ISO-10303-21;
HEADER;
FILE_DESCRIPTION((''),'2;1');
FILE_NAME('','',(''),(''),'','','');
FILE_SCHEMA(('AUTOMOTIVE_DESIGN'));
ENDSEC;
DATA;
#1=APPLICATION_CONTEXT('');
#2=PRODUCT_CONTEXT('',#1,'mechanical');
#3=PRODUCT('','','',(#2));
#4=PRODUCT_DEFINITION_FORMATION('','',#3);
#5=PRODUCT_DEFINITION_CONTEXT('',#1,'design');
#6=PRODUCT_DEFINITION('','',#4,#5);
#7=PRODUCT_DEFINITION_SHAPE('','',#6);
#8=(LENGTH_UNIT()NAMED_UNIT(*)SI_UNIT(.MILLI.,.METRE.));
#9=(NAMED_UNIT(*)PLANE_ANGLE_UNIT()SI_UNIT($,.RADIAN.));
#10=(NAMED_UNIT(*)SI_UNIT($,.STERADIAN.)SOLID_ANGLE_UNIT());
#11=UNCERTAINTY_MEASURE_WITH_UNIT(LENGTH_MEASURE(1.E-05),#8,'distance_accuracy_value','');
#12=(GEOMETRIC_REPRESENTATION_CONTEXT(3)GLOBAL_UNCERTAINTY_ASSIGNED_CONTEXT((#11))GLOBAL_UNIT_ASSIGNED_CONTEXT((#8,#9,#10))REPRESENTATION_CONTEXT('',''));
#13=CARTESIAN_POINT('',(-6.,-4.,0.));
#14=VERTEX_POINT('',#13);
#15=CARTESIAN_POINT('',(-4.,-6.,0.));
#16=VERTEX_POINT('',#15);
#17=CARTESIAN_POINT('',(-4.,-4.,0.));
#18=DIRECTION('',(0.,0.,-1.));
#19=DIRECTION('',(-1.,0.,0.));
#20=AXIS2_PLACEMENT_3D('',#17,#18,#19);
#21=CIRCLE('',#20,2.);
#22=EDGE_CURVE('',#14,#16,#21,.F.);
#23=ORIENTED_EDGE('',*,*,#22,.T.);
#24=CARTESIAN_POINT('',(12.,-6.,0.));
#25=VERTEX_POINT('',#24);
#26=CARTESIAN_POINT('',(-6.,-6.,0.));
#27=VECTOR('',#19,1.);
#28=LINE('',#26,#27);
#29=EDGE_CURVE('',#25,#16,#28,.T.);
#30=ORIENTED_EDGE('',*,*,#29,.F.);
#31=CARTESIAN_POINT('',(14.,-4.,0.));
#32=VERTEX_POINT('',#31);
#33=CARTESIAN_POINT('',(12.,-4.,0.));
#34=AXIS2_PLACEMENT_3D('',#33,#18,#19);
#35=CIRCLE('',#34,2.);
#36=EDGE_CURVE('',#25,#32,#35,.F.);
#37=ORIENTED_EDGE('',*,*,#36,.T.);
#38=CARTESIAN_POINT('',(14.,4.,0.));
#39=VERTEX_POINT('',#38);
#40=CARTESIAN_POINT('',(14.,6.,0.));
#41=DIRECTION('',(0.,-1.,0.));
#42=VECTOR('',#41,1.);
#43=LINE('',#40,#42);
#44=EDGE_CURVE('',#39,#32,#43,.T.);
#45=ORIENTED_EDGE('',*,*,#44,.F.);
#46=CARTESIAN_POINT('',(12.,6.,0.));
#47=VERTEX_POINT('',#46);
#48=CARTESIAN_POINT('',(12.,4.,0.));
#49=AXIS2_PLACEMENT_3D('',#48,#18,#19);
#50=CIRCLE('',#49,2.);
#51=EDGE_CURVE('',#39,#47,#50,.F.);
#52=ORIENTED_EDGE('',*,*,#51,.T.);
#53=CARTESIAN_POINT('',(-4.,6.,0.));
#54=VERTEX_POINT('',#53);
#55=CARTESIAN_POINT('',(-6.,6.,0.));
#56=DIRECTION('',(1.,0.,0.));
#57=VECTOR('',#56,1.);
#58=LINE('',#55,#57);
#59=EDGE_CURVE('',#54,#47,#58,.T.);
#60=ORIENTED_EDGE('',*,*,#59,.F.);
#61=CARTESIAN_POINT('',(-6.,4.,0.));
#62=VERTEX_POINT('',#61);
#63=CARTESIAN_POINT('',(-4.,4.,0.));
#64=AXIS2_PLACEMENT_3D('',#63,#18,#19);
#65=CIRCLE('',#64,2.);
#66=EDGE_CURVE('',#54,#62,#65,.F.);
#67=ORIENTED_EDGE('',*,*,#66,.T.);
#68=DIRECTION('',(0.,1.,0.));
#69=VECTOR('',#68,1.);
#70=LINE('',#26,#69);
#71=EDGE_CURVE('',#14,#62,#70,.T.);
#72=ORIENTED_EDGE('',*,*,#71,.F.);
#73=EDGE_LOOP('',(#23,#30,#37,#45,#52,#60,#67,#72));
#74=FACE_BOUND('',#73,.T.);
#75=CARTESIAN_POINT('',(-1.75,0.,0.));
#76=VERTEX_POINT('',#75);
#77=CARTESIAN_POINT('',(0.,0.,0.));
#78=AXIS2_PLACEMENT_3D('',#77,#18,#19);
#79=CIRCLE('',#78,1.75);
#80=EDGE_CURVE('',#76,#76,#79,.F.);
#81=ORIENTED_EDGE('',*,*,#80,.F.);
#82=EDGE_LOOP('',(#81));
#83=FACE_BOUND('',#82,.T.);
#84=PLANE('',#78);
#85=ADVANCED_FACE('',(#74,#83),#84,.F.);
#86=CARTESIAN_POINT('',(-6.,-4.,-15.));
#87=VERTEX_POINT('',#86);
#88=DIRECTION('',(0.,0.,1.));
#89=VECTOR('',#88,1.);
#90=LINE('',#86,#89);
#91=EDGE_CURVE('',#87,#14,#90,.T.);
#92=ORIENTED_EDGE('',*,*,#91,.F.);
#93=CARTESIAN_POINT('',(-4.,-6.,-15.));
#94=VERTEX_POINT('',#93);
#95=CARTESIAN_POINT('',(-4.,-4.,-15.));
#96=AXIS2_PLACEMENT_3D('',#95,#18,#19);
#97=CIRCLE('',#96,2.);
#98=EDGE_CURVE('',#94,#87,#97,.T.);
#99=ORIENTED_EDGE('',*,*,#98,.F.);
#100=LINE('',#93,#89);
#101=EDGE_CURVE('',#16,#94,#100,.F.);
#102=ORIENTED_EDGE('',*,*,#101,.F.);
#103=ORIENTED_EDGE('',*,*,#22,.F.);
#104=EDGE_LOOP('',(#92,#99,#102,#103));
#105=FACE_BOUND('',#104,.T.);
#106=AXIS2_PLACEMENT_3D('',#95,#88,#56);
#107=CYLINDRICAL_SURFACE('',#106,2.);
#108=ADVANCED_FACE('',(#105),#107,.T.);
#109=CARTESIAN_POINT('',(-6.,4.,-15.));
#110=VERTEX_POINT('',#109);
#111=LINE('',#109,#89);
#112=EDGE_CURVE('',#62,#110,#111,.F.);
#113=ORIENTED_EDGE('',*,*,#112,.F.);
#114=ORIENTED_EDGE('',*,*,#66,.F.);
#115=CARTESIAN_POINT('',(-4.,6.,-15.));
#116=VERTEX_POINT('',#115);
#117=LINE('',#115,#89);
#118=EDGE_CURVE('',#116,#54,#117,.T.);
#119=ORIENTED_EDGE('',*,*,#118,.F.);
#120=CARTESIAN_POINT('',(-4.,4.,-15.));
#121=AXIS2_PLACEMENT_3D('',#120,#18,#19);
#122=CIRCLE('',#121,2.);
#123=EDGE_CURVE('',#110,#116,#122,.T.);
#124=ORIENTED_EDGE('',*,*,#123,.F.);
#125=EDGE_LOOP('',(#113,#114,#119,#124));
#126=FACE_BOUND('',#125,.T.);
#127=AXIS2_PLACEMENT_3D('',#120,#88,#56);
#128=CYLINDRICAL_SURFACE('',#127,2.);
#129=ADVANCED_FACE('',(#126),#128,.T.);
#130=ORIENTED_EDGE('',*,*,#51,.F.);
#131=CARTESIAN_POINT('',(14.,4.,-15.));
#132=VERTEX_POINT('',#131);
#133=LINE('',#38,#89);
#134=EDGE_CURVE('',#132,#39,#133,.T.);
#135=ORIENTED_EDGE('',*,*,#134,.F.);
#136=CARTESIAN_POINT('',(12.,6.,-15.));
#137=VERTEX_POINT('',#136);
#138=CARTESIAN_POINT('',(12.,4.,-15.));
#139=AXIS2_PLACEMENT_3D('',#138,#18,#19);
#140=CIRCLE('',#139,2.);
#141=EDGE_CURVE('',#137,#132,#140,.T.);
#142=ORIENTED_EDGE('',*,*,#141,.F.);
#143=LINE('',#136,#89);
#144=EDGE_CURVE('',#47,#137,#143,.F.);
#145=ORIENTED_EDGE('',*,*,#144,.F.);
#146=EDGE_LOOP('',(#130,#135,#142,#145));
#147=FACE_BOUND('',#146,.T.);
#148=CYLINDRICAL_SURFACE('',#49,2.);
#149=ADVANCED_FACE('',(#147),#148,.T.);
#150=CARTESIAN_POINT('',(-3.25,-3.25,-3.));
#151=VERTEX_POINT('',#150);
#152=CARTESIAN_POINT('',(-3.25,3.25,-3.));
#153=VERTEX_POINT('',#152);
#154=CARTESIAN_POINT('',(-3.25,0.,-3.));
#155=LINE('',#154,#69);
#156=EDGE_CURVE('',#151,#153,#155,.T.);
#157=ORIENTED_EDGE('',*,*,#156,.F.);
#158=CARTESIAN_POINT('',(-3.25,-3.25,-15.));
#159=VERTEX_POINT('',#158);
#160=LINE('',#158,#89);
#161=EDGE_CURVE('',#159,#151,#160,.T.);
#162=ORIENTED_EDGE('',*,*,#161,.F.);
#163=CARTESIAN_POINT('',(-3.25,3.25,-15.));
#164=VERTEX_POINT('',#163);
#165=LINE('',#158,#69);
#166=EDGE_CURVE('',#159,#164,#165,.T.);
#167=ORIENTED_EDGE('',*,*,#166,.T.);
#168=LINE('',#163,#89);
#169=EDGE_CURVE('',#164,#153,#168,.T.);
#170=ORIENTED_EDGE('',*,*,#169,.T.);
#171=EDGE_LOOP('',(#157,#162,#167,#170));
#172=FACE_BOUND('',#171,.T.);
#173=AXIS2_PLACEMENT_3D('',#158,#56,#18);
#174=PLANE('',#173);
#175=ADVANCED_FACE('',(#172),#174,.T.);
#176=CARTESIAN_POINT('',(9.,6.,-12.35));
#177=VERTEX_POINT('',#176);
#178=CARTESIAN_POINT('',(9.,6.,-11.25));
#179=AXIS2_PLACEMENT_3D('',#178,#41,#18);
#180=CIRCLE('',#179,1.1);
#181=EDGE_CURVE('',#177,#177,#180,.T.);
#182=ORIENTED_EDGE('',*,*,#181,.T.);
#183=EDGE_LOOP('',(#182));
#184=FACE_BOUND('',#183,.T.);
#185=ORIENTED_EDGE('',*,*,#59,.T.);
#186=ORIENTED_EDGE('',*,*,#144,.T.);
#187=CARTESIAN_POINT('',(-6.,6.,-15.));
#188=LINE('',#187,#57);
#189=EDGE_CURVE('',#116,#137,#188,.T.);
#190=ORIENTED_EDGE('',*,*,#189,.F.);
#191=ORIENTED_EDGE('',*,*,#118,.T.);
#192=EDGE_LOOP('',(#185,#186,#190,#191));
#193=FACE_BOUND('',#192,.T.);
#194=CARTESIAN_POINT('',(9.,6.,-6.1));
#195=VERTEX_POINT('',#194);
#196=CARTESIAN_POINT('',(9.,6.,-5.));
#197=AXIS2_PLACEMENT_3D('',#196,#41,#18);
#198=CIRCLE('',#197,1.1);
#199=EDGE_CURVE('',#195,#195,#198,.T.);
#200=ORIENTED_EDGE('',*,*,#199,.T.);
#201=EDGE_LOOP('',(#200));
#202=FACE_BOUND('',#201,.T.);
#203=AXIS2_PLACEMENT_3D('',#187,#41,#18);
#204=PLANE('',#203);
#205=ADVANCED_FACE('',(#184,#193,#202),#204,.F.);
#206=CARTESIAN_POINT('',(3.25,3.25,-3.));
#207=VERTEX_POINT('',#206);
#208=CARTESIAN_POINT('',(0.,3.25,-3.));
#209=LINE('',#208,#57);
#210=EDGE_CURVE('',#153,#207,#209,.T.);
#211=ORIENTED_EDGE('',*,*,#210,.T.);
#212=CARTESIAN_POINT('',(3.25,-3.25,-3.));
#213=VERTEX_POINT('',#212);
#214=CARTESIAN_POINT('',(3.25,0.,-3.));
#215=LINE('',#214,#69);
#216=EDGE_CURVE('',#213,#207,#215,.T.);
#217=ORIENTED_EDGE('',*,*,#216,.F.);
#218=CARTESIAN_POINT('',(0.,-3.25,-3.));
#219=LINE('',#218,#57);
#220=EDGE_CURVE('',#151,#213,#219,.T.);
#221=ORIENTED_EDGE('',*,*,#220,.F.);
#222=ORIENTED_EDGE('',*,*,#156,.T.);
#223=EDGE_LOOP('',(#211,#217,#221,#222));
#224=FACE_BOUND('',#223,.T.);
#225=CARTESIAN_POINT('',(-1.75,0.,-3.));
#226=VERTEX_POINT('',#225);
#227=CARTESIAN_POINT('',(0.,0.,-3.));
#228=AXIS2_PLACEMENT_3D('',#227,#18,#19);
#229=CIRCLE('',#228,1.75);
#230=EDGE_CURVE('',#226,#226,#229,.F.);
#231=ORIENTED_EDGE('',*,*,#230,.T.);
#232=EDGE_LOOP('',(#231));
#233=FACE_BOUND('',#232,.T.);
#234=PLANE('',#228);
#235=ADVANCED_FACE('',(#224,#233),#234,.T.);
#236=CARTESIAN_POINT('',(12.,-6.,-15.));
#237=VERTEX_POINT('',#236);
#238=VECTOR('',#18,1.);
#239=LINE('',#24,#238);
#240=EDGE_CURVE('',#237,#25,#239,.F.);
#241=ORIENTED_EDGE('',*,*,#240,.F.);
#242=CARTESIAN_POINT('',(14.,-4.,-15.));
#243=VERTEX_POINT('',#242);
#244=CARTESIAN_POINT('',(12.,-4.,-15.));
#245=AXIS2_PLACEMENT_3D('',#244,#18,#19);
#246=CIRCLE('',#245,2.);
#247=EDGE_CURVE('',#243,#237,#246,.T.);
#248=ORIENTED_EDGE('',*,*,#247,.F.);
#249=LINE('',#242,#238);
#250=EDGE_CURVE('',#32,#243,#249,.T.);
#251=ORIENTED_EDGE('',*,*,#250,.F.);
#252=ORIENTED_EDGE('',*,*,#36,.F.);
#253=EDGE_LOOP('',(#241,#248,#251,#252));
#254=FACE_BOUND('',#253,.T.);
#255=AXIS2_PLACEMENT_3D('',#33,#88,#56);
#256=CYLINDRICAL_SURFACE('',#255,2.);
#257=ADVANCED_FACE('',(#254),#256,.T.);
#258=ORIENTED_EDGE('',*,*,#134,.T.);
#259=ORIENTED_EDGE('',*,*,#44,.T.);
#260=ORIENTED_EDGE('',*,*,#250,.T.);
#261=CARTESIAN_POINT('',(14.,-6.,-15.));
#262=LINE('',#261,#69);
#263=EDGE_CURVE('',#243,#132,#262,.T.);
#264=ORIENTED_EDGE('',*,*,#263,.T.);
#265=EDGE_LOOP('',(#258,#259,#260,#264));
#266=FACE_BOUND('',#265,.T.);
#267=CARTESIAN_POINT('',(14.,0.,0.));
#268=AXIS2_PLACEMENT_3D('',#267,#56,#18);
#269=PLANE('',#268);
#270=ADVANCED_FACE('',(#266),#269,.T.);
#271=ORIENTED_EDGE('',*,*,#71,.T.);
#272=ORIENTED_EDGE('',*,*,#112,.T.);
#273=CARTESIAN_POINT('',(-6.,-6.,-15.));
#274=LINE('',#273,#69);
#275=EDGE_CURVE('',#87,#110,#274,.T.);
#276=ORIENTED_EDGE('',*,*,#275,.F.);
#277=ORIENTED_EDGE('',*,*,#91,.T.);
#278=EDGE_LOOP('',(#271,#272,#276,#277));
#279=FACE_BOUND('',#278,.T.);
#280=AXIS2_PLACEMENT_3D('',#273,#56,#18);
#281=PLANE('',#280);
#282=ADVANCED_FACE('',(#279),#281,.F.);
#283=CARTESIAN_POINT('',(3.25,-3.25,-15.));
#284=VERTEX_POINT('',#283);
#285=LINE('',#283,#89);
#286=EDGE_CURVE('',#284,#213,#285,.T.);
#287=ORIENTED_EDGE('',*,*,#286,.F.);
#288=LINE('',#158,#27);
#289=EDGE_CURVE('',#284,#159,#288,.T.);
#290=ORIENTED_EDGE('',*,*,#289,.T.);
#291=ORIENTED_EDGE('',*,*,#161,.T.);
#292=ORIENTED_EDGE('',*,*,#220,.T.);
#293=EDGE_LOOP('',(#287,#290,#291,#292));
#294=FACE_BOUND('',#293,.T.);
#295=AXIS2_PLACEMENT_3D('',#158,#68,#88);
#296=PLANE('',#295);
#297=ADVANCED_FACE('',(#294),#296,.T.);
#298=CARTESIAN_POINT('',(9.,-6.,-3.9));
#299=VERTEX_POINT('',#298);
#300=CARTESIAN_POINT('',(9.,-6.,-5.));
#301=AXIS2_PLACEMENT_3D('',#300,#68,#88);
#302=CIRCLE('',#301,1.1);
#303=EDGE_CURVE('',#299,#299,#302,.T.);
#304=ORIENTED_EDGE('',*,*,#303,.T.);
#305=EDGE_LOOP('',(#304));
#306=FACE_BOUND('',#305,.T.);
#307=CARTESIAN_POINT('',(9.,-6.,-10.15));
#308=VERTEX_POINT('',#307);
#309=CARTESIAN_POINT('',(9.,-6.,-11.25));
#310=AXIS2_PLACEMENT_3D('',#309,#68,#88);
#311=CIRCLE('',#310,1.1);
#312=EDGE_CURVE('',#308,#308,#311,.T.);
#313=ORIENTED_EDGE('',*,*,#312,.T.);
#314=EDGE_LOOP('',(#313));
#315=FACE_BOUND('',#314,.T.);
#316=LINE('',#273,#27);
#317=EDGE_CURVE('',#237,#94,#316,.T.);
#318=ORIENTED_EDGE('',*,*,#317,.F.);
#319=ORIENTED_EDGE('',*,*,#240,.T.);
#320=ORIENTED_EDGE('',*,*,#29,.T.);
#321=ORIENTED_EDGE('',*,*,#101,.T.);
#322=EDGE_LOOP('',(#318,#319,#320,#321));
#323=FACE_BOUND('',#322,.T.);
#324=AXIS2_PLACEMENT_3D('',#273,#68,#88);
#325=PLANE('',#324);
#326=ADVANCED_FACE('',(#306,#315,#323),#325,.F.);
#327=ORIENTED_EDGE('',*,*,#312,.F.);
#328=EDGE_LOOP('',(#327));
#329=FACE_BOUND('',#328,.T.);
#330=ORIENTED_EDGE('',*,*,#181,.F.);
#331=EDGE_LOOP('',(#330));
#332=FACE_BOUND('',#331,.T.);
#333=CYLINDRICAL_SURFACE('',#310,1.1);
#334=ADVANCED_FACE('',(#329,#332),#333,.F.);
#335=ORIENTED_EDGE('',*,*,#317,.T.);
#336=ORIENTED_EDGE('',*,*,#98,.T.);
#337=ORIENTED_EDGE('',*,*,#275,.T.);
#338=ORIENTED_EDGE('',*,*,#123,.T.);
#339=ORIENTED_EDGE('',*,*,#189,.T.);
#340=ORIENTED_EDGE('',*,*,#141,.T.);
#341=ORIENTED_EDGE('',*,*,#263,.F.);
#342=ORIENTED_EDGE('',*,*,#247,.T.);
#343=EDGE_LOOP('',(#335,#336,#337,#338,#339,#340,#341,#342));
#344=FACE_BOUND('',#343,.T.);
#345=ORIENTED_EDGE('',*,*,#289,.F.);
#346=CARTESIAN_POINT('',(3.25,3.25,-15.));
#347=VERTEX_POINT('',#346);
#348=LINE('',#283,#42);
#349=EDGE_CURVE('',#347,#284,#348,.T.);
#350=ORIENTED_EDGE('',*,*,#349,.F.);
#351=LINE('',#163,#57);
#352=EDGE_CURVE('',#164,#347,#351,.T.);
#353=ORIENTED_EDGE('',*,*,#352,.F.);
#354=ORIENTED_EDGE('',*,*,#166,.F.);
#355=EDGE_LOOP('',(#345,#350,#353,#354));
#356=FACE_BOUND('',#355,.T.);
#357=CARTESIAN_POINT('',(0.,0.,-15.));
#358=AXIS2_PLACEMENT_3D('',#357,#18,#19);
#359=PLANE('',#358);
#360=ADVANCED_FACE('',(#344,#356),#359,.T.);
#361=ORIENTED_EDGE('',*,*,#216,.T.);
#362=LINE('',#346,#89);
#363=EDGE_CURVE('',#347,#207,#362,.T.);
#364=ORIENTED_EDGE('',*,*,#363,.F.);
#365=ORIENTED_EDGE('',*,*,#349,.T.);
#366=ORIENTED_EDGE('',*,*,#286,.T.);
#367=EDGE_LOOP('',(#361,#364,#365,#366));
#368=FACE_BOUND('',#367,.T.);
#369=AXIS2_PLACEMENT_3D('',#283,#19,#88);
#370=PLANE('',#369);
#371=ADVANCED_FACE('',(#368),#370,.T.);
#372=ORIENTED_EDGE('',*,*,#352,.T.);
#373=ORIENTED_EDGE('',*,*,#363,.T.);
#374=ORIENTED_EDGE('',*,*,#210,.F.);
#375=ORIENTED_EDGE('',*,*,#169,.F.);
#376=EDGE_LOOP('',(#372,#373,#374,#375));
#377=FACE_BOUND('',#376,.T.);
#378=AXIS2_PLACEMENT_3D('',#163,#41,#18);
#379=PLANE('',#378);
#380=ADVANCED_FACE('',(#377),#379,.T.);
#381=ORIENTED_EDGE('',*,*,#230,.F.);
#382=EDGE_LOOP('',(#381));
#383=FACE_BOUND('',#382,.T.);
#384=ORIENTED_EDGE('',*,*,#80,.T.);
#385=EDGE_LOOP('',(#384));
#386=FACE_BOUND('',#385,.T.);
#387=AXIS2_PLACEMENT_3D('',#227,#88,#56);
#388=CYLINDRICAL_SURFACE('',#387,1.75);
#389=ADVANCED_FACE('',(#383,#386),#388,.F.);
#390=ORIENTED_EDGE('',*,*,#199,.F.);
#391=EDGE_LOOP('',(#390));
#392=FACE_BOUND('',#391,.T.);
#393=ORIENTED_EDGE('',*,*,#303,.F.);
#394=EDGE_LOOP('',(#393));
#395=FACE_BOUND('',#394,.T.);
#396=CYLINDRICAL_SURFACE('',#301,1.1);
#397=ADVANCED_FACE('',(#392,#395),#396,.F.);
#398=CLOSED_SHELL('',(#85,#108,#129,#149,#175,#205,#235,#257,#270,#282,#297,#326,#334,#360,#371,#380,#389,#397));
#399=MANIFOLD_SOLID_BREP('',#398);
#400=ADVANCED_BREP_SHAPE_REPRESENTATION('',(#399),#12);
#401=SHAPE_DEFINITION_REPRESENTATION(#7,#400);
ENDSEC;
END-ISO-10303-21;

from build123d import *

# Parameters (mm, degrees)
SKETCH1_R               = 4.5
SKETCH1_R_2             = 1.25
BOSS_EXTRUDE1_DEPTH     = 8
SKETCH2_R               = 1.75
SKETCH2_R_2             = 1.25
CUT_EXTRUDE1_DEPTH      = 4
SKETCH4_W               = 12
SKETCH4_H               = 12
SKETCH4_W_2             = 6.5
SKETCH4_H_2             = 6.5
BOSS_EXTRUDE2_DEPTH     = 15
SKETCH5_W               = 15
SKETCH5_H               = 12
BOSS_EXTRUDE3_DEPTH     = 8
CUT_EXTRUDE2_DEPTH      = 24.769728648
CUT_EXTRUDE2_DEPTH_BACK = 24.769728648
SKETCH6_R               = 1.1
FILLET1_R               = 2
SKETCH1_2_R             = 4.5
SKETCH1_2_R_2           = 1.25
CUT_EXTRUDE5_DEPTH      = 8
BOSS_EXTRUDE5_OUTLINE_W = 6.5
BOSS_EXTRUDE5_OUTLINE_H = 6.5
BOSS_EXTRUDE5_OUTLINE_R = 1.75
BOSS_EXTRUDE5_DEPTH     = 3


# Read off the part's stored shape, not the designer's step: Boss-Extrude5
with BuildPart() as part:
    # Sketch1 → Boss-Extrude1 (new body)
    with BuildSketch(Plane.XY):
        Circle(SKETCH1_R)
        Circle(SKETCH1_R_2, mode=Mode.SUBTRACT)
    extrude(amount=BOSS_EXTRUDE1_DEPTH)

    # Sketch2 → Cut-Extrude1 (cut)
    with BuildSketch(Plane(origin=(0, 0, 0), x_dir=(-1, 0, 0), z_dir=(0, 0, -1))):
        Circle(SKETCH2_R)
        Circle(SKETCH2_R_2, mode=Mode.SUBTRACT)
    extrude(amount=-CUT_EXTRUDE1_DEPTH, mode=Mode.SUBTRACT)

    # Sketch4 → Boss-Extrude2 (add)
    with BuildSketch(Plane(origin=(0, 0, 0), x_dir=(-1, 0, 0), z_dir=(0, 0, -1))):
        Rectangle(SKETCH4_W, SKETCH4_H)
        Rectangle(SKETCH4_W_2, SKETCH4_H_2, mode=Mode.SUBTRACT)
    extrude(amount=BOSS_EXTRUDE2_DEPTH)

    # Sketch5 → Boss-Extrude3 (add)
    with BuildSketch(Plane(origin=(6, 0, 0), x_dir=(0, 0, -1), z_dir=(1, 0, 0))):
        with Locations((7.5, 0)):
            Rectangle(SKETCH5_W, SKETCH5_H)
    extrude(amount=BOSS_EXTRUDE3_DEPTH)

    # Sketch6 → Cut-Extrude2 (cut, two sides: drawn at the far end of the back side and taken through both)
    with BuildSketch(Plane(origin=(0, 6, 0), x_dir=(1, 0, 0), z_dir=(0, 1, 0)).offset(-CUT_EXTRUDE2_DEPTH_BACK)):
        with Locations(Location((9, 11.25, 0), (0, 0, 270))):
            Circle(SKETCH6_R)
        with Locations(Location((9, 5, 0), (0, 0, 270))):
            Circle(SKETCH6_R)
    extrude(amount=CUT_EXTRUDE2_DEPTH + CUT_EXTRUDE2_DEPTH_BACK, mode=Mode.SUBTRACT)

    # Fillet1
    fillet1_edges = [part.edges().sort_by_distance(p)[0] for p in [
        (-6, -6, -7.5),
        (-6, 6, -7.5),
        (14, 6, -7.5),
        (14, -6, -7.5),
    ]]
    fillet(fillet1_edges, radius=FILLET1_R)

    # Sketch1<2> → Cut-Extrude5 (cut)
    with BuildSketch(Plane.XY):
        Circle(SKETCH1_2_R)
        Circle(SKETCH1_2_R_2, mode=Mode.SUBTRACT)
    extrude(amount=CUT_EXTRUDE5_DEPTH, mode=Mode.SUBTRACT)

    # Boss-Extrude5 outline → Boss-Extrude5 (add)
    with BuildSketch(Plane(origin=(0, 0, 0), x_dir=(-1, 0, 0), z_dir=(0, 0, -1))):
        Rectangle(BOSS_EXTRUDE5_OUTLINE_W, BOSS_EXTRUDE5_OUTLINE_H)
        Circle(BOSS_EXTRUDE5_OUTLINE_R, mode=Mode.SUBTRACT)
    extrude(amount=BOSS_EXTRUDE5_DEPTH)


solid = part.part
